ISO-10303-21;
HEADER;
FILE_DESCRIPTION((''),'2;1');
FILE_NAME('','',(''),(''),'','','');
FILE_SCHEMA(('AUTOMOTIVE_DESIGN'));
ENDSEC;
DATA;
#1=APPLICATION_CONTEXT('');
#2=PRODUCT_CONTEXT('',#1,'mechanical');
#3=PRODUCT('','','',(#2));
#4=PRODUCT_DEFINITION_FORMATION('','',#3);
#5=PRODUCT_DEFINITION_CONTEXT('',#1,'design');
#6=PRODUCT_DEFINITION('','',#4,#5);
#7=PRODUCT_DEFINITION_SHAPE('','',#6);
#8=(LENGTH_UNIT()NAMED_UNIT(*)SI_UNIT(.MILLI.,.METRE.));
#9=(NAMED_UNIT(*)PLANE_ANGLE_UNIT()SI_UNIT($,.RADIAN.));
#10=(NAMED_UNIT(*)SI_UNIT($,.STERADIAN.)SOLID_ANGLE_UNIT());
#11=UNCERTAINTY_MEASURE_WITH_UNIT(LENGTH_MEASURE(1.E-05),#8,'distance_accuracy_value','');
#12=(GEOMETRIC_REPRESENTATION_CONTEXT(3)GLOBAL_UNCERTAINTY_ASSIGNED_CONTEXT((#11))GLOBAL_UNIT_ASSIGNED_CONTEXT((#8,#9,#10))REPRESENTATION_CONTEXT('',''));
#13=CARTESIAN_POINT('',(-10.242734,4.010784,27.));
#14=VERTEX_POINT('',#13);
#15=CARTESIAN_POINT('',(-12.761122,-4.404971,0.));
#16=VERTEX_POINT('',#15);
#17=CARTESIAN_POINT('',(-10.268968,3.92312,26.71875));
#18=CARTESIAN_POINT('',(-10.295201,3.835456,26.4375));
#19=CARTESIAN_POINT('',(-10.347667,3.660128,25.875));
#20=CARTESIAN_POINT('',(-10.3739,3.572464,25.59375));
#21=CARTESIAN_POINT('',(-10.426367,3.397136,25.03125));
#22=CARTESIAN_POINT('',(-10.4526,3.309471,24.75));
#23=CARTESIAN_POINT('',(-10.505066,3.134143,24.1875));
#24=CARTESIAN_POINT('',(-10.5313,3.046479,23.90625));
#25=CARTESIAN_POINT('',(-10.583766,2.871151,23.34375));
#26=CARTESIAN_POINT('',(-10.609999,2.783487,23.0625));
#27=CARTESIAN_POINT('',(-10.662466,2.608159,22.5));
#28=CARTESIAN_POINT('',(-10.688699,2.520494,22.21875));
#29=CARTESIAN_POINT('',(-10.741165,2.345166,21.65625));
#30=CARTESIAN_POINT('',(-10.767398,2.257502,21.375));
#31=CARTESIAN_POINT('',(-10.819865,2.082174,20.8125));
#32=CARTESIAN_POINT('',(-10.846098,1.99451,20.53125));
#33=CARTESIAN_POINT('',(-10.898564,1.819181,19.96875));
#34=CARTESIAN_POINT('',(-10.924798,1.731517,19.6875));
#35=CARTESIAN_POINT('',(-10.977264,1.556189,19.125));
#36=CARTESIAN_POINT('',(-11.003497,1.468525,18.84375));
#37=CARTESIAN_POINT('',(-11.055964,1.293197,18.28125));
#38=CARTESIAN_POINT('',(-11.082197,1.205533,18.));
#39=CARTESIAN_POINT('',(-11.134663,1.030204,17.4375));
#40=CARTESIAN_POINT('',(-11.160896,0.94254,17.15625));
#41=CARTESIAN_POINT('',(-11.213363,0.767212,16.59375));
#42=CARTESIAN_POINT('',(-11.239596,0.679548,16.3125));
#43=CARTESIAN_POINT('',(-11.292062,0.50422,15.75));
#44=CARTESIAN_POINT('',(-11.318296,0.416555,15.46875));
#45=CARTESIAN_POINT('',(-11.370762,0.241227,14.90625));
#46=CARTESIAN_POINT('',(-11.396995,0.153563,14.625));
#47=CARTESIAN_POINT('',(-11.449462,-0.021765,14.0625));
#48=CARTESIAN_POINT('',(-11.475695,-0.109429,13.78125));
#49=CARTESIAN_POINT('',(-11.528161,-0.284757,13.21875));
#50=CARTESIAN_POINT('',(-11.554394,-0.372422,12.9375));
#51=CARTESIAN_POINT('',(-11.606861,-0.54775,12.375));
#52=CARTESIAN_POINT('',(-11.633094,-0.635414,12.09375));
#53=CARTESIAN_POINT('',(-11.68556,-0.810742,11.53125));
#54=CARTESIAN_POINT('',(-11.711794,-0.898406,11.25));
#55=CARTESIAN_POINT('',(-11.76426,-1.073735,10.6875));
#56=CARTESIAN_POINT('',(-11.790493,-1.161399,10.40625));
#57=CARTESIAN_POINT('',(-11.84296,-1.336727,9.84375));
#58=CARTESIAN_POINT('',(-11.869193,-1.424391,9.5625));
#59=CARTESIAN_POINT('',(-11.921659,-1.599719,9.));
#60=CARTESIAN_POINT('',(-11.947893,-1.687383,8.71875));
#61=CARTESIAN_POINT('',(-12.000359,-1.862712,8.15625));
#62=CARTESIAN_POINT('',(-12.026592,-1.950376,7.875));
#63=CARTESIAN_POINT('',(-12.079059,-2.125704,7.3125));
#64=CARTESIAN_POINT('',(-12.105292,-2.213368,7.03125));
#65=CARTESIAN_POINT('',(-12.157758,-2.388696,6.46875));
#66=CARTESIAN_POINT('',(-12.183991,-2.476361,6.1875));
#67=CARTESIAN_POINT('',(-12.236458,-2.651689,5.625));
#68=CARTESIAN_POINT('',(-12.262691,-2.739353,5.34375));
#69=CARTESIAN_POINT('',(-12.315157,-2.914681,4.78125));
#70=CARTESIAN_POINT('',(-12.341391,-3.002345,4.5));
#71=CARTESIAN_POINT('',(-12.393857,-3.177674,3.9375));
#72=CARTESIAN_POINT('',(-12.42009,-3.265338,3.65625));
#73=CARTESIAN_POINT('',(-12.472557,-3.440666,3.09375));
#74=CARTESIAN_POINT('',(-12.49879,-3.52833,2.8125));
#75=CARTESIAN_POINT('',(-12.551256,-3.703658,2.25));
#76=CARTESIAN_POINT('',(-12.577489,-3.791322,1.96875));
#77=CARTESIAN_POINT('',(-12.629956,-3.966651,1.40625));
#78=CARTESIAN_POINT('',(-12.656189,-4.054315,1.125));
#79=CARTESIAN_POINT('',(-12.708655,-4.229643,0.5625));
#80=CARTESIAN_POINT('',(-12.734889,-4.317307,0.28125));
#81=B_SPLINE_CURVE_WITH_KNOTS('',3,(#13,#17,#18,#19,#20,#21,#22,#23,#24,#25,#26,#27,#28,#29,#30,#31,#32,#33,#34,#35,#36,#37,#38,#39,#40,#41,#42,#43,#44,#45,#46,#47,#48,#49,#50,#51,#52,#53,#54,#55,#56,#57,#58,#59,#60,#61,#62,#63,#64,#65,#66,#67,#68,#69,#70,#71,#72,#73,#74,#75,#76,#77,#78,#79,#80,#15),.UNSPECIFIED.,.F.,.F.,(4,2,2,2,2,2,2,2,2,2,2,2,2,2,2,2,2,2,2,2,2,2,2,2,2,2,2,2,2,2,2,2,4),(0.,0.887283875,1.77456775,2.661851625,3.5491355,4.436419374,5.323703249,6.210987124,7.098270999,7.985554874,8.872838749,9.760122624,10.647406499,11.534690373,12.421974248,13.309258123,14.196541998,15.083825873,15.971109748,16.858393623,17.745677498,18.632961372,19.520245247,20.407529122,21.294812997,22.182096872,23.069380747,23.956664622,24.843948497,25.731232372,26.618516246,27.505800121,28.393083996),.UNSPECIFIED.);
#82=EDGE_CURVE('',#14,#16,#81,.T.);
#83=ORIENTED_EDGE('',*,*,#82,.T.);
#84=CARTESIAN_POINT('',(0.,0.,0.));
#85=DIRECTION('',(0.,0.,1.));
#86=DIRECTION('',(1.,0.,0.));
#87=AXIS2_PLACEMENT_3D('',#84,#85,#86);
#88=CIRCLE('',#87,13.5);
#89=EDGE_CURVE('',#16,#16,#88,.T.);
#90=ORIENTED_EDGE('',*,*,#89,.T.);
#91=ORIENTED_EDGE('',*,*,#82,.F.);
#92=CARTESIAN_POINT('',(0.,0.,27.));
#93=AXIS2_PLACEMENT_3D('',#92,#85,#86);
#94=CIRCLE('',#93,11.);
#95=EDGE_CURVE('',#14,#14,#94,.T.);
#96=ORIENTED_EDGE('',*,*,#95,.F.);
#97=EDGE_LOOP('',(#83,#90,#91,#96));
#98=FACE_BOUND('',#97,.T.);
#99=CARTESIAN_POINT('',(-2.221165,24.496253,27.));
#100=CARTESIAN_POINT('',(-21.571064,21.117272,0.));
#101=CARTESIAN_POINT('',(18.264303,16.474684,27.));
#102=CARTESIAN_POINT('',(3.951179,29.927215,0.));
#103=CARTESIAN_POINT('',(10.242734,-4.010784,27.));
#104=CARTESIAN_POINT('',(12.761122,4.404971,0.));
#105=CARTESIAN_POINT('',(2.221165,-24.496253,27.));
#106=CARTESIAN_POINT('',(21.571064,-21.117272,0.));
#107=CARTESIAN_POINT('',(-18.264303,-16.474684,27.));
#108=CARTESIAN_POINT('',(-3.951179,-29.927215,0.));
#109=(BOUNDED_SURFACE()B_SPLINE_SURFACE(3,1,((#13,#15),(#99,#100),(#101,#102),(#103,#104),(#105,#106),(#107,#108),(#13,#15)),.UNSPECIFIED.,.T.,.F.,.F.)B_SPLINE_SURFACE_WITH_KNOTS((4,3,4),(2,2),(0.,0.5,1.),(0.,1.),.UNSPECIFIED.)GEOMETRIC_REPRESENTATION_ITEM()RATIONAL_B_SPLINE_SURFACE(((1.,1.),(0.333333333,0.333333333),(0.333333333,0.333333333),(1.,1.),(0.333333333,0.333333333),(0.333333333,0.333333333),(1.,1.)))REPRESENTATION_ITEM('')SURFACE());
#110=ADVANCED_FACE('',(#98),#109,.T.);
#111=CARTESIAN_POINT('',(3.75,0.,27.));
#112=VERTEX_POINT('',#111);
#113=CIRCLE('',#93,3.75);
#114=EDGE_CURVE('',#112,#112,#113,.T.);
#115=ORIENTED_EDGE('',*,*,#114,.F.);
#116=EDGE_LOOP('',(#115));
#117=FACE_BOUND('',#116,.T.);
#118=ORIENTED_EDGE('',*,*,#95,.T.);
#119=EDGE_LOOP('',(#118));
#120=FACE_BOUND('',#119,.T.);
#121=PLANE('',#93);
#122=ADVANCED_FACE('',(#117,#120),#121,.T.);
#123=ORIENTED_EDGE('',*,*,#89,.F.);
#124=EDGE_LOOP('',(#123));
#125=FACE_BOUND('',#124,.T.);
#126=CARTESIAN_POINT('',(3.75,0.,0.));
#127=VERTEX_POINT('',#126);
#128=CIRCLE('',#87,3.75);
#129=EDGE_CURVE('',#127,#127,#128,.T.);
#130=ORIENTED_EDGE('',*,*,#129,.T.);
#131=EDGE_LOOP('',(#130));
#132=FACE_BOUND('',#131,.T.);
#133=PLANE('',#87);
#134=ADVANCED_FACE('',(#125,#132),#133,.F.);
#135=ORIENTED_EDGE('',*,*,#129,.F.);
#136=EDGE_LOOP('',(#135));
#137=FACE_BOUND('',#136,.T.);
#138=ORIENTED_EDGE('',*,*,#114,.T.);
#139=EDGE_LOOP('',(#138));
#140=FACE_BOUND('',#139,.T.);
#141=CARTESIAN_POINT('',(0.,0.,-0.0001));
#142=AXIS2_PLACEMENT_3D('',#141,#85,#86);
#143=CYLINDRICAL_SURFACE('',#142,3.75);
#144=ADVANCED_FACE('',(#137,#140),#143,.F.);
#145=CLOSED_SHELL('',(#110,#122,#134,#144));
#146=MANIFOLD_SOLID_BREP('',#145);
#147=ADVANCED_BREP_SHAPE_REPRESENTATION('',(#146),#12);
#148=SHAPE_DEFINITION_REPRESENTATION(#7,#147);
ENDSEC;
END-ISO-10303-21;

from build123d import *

# Parameters (mm, degrees)
ESQUISSE2_3_R           = 3.75
ENL_V_MAT_EXTRU_1_DEPTH = 34.068111691


with BuildPart() as part:
    # Lissage1: read off the stored shape, not the designer's step
    # Lissage1: loft between two sections, ruled curve by curve
    lissage1_from = [
        Edge.make_bspline([(-10.242734396, 4.010784473, 27), (-2.22116545, 24.496253265, 27), (18.264303342, 16.474684319, 27), (10.242734396, -4.010784473, 27), (2.22116545, -24.496253265, 27), (-18.264303342, -16.474684319, 27), (-10.242734396, 4.010784473, 27)], [0, 0, 0, 0, 0.5, 0.5, 0.5, 1, 1, 1, 1], 3, [1, 0.333333333, 0.333333333, 1, 0.333333333, 0.333333333, 1]),
    ]
    lissage1_to = [
        Edge.make_bspline([(-12.761121759, -4.404971221, 0), (-21.571064201, 21.117272296, 0), (3.951179317, 29.927214739, 0), (12.761121759, 4.404971221, 0), (21.571064201, -21.117272296, 0), (-3.951179317, -29.927214739, 0), (-12.761121759, -4.404971221, 0)], [0, 0, 0, 0, 0.5, 0.5, 0.5, 1, 1, 1, 1], 3, [1, 0.333333333, 0.333333333, 1, 0.333333333, 0.333333333, 1]),
    ]
    lissage1 = Solid(Shell([*[Face.make_surface_from_curves(lissage1_from[k], lissage1_to[k]) for k in range(1)], Face(Wire(lissage1_from)), Face(Wire(lissage1_to))]))
    add(lissage1)

    # Esquisse2<3> → Enlèv. mat.-Extru.1 (cut, through all)
    with BuildSketch(Plane.XY.offset(27)):
        Circle(ESQUISSE2_3_R)
    extrude(amount=-ENL_V_MAT_EXTRU_1_DEPTH, mode=Mode.SUBTRACT)


solid = part.part
